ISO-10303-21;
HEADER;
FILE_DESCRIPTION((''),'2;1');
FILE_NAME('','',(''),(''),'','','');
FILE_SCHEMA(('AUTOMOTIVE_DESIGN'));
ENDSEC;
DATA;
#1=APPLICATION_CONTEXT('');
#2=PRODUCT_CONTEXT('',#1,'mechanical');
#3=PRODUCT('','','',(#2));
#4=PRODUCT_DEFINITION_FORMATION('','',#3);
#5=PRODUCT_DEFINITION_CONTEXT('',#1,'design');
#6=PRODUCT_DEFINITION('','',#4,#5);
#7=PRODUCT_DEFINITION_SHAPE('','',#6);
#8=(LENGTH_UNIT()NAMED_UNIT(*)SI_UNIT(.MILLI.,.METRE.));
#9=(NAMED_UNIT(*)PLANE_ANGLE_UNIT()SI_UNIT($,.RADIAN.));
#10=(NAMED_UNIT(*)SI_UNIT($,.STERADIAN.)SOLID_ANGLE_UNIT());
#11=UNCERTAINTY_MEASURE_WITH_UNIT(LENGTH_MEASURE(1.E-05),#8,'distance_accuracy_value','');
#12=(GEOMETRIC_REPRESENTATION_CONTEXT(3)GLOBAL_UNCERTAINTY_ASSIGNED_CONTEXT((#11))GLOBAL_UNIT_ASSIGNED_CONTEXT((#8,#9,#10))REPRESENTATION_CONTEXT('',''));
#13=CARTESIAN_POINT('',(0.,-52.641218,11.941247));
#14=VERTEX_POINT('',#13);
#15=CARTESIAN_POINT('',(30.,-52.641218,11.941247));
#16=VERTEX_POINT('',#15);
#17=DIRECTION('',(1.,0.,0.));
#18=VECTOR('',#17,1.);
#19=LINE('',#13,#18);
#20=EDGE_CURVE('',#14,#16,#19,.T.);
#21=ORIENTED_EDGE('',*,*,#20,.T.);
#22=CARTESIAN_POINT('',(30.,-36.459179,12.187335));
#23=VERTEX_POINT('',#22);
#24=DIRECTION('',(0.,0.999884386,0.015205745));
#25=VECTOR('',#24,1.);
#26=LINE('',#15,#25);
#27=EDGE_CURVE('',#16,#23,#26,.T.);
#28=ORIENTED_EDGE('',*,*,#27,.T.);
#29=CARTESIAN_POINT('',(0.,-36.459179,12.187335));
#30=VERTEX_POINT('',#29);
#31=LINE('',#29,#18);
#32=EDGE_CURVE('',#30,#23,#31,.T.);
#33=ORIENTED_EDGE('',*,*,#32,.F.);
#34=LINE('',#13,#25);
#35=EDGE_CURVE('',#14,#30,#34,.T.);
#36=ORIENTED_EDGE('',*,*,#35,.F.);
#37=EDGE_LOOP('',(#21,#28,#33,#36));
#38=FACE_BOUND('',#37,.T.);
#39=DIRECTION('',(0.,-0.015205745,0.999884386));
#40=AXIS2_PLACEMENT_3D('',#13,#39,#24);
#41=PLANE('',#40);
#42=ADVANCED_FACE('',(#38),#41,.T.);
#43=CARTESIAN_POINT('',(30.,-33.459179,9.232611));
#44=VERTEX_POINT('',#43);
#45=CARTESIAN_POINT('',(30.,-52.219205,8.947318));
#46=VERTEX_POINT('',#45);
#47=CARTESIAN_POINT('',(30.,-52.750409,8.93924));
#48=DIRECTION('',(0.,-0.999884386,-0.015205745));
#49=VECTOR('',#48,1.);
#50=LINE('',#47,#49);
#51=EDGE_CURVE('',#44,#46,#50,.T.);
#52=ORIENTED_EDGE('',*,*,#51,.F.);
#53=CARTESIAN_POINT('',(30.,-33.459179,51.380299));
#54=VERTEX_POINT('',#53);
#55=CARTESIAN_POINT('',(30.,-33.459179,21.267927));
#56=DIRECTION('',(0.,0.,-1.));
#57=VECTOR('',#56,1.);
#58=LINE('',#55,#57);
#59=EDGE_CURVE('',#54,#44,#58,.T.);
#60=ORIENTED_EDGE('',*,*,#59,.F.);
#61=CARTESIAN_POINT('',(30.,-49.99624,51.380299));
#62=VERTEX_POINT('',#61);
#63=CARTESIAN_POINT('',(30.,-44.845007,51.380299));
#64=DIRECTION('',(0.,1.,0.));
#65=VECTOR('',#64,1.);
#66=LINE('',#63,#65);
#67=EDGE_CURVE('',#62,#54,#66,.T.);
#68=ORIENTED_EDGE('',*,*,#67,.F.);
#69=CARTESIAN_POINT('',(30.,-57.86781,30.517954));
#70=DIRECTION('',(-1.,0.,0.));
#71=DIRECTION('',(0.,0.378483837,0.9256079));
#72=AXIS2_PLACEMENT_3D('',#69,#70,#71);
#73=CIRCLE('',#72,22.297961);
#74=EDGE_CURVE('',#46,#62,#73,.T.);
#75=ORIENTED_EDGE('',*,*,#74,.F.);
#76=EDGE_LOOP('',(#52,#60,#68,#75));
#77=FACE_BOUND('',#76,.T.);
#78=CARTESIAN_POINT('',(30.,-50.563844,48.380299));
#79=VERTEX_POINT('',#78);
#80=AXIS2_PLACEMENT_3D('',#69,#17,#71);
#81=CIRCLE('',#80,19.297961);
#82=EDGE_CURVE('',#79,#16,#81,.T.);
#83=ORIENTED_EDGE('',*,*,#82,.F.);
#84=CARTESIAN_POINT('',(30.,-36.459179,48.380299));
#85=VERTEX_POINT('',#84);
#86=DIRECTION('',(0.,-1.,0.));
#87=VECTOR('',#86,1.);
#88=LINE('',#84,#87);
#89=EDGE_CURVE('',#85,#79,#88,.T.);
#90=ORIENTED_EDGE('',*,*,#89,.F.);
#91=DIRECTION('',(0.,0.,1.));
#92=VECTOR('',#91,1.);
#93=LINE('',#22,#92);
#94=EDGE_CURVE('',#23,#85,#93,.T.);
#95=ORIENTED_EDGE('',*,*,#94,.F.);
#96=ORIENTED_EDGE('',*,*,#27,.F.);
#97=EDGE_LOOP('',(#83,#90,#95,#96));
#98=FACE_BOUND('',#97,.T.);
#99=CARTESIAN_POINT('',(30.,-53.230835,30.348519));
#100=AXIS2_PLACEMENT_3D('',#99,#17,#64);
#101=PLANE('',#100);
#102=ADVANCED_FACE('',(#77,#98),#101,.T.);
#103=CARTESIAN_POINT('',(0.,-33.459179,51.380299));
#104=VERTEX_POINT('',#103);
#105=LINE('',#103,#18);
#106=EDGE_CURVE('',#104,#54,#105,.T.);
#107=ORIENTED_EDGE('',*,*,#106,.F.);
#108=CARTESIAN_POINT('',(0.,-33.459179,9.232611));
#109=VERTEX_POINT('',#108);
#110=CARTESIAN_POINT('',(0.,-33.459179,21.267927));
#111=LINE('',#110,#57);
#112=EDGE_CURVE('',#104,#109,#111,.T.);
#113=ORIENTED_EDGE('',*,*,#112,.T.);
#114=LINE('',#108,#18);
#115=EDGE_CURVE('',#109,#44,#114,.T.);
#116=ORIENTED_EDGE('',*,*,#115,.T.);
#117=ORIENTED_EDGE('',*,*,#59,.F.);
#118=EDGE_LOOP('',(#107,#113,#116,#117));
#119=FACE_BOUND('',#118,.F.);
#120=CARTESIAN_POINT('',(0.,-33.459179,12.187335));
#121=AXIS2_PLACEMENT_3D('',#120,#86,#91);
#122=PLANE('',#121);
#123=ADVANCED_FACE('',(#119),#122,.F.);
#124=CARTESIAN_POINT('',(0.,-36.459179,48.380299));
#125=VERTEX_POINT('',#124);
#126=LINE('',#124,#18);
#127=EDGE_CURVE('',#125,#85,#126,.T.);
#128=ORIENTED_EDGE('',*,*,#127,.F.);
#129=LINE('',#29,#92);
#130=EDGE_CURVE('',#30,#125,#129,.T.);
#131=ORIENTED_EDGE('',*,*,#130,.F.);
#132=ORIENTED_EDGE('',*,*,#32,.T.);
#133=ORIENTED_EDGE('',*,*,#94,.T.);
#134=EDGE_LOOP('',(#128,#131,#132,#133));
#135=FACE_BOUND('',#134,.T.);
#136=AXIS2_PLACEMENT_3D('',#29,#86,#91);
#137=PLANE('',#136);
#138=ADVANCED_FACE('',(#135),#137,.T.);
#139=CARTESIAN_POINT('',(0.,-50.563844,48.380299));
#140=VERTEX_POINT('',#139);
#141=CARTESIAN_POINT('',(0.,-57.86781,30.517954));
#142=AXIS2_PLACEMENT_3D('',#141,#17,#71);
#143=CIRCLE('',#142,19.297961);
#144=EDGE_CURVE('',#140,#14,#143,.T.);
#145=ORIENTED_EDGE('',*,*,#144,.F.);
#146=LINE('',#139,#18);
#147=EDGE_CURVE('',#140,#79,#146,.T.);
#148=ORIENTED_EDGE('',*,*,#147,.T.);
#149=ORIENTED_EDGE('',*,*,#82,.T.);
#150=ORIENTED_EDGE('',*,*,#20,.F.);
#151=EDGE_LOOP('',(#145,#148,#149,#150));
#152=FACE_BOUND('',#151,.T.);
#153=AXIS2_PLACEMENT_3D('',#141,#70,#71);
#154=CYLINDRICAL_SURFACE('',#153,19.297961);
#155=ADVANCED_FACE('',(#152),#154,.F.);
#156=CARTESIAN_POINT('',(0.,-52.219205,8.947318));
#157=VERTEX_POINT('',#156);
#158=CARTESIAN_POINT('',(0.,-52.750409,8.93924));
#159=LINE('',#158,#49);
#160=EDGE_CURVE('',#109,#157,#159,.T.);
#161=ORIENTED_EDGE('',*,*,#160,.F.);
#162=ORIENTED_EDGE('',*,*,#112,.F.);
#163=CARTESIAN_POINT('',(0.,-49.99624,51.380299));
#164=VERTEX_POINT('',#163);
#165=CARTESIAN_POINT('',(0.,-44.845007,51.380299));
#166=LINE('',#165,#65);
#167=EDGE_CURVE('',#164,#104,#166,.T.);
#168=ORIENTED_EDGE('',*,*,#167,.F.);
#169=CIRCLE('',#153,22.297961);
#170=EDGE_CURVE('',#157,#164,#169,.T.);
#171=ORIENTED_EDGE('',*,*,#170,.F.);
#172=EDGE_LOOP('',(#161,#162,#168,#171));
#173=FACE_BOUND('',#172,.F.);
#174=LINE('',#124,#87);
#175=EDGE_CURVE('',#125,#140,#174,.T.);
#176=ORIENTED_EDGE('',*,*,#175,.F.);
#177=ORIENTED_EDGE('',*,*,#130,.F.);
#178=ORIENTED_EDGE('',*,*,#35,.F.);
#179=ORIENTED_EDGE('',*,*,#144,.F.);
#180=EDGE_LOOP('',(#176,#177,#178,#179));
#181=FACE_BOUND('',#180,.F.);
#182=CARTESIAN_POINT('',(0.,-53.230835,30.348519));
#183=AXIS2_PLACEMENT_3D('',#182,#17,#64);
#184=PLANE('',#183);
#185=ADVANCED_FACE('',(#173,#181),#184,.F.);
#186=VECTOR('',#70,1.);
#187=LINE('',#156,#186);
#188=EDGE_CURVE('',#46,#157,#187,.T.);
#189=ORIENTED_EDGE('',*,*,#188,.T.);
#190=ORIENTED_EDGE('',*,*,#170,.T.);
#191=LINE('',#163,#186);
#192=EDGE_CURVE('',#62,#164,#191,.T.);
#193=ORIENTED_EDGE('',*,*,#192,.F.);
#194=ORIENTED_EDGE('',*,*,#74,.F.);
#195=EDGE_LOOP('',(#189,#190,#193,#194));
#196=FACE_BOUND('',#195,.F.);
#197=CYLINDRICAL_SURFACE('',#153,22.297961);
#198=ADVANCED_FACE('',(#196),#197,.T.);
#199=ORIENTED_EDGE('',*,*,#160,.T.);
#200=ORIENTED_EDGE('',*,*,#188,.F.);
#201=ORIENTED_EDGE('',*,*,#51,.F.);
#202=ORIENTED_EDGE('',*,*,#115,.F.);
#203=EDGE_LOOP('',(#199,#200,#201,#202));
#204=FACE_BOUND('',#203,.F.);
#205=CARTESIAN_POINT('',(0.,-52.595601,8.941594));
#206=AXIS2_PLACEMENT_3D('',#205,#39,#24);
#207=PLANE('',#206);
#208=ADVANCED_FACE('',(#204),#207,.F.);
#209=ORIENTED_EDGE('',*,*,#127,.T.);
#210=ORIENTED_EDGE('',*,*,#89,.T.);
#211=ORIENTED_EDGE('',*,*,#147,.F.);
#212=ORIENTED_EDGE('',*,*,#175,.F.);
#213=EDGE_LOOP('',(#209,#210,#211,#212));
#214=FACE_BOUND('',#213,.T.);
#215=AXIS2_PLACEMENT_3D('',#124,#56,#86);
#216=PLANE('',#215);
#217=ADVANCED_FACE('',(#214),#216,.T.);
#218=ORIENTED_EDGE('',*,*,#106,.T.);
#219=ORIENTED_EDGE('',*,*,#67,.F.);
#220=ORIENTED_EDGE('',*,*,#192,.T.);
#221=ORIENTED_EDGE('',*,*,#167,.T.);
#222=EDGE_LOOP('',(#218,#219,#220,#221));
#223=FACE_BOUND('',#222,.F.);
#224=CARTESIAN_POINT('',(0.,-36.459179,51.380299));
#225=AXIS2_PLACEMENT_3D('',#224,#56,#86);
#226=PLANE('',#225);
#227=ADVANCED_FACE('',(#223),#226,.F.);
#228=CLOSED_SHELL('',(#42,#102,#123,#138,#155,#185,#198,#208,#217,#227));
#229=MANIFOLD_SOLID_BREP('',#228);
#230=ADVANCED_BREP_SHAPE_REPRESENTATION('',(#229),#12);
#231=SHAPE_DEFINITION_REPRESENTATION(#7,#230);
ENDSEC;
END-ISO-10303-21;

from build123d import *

# Parameters (mm, degrees)
F1_DEPTH = 30
F2_T     = 3


with BuildPart() as f1:
    # F0 (on Right) → F1 (new body)
    with BuildSketch(Plane.YZ):
        with BuildLine():
            ThreePointArc((-50.5638438315, 48.3802992553), (-77.1344876234, 31.6163385121), (-52.6412177761, 11.9412470637))
            Line((-52.6412177761, 11.9412470637), (-36.4591793272, 12.1873354573))
            Line((-36.4591793272, 12.1873354573), (-36.4591793272, 42.854900606))
            Line((-36.4591793272, 42.854900606), (-36.4591793272, 48.3802992553))
            Line((-36.4591793272, 48.3802992553), (-38.9720265736, 48.3802992553))
            Line((-38.9720265736, 48.3802992553), (-50.5638438315, 48.3802992553))
        make_face()
    extrude(amount=F1_DEPTH)

    # F2
    f2_openings = [f1.faces().sort_by_distance(p)[0] for p in [
        (30, -55.280278, 30.40174),
        (0, -55.280278, 30.40174),
    ]]
    offset(amount=F2_T, openings=f2_openings, kind=Kind.INTERSECTION)


solid = f1.part
